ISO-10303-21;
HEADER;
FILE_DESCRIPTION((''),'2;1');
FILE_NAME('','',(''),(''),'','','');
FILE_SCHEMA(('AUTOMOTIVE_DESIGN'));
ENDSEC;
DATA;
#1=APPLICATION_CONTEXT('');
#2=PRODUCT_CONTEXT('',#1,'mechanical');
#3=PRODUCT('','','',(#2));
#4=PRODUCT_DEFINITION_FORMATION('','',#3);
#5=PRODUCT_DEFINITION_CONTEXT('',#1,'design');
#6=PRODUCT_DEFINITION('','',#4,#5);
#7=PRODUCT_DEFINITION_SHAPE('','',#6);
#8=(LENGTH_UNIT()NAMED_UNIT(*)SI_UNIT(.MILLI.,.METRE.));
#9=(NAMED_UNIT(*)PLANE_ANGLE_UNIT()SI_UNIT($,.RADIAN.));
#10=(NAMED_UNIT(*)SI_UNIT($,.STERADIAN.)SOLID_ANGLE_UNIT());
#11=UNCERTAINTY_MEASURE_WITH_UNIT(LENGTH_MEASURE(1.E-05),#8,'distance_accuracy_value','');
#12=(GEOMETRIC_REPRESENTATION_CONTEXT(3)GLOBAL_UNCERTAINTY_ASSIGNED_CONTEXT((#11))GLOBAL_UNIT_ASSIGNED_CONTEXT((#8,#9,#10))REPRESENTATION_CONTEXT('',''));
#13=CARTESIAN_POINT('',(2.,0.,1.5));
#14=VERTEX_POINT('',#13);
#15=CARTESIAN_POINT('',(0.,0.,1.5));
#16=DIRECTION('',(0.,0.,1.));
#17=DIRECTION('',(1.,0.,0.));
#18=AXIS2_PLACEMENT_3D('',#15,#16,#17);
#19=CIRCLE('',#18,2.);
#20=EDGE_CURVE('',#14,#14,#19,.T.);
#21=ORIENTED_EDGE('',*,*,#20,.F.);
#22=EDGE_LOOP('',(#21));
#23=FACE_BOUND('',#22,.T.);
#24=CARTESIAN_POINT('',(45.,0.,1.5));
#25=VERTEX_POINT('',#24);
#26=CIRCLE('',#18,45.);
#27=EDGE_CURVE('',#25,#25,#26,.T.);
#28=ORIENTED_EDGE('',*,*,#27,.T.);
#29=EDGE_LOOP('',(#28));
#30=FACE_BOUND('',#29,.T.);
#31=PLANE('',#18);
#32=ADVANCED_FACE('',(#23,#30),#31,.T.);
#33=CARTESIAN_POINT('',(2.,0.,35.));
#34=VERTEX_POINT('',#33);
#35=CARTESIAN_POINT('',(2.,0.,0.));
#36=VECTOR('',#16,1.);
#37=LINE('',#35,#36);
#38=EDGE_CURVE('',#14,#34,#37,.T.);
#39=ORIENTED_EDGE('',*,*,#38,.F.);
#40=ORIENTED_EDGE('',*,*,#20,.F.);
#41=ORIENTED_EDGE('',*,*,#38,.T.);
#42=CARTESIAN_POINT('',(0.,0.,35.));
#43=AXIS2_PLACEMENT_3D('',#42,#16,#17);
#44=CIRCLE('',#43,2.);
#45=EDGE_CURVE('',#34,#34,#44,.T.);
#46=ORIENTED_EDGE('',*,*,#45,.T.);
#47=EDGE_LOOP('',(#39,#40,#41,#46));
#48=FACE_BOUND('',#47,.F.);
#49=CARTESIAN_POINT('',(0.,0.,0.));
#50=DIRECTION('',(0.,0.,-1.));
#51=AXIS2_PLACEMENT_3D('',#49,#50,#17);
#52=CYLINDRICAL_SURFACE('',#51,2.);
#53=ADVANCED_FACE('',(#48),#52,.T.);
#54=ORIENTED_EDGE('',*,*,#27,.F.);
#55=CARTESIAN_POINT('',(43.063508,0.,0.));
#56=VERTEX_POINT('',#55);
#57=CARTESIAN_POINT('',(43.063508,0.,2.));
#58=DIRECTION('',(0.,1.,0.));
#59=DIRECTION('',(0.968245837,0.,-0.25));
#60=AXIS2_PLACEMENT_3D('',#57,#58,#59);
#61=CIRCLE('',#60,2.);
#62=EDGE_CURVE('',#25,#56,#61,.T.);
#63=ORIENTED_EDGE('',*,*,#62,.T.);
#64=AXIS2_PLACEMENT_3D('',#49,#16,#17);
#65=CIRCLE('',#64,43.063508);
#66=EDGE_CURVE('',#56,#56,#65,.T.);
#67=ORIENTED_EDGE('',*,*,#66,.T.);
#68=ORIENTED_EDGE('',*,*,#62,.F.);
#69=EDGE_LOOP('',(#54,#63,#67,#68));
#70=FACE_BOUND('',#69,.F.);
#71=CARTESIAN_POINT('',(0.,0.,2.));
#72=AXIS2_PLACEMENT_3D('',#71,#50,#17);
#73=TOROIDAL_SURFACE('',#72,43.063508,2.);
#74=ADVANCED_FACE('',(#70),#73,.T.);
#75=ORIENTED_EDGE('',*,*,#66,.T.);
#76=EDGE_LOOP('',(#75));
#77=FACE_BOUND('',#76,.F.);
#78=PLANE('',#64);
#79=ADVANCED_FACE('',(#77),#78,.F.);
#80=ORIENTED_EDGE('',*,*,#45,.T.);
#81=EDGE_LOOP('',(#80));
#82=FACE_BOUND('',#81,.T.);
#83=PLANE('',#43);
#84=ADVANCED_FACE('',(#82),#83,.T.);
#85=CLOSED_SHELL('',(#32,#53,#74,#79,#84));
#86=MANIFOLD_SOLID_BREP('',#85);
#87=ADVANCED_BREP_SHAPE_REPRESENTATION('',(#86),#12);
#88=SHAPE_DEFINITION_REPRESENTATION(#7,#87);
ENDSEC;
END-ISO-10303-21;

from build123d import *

# Parameters (mm, degrees)
F0_R     = 45
F0_R_2   = 2
F1_DEPTH = 1.5
F2_DEPTH = 35


# Not quite as in the source:
# - a fillet or chamfer that OpenCascade refuses, or shapes differently, is made with other operations: its cross-section is extruded or revolved along the edge and cut away or added


with BuildPart() as f1:
    # F0 (on Top) → F1 (new body)
    with BuildSketch(Plane.XY):
        Circle(F0_R)
        Circle(F0_R_2, mode=Mode.SUBTRACT)
    extrude(amount=F1_DEPTH)

    # F0 (on Top) → F2 (join)
    with BuildSketch(Plane.XY):
        Circle(F0_R_2)
    extrude(amount=F2_DEPTH)

    # F3: fillet of radius 2 on 1 edges, made by hand

    # F3_s1 → F3_t2 (revolve, cut)
    with BuildSketch(Plane.XZ):
        with BuildLine():
            ThreePointArc((45, 1.5), (44.2882531983, 0.4188611699), (43.0635083269, 0))
            Line((43.0635083269, 0), (45, 0))
            Line((45, 0), (45, 1.5))
        make_face()
    revolve(axis=Axis((0, 0, 0), (0, 0, 1)), mode=Mode.SUBTRACT)


solid = f1.part
